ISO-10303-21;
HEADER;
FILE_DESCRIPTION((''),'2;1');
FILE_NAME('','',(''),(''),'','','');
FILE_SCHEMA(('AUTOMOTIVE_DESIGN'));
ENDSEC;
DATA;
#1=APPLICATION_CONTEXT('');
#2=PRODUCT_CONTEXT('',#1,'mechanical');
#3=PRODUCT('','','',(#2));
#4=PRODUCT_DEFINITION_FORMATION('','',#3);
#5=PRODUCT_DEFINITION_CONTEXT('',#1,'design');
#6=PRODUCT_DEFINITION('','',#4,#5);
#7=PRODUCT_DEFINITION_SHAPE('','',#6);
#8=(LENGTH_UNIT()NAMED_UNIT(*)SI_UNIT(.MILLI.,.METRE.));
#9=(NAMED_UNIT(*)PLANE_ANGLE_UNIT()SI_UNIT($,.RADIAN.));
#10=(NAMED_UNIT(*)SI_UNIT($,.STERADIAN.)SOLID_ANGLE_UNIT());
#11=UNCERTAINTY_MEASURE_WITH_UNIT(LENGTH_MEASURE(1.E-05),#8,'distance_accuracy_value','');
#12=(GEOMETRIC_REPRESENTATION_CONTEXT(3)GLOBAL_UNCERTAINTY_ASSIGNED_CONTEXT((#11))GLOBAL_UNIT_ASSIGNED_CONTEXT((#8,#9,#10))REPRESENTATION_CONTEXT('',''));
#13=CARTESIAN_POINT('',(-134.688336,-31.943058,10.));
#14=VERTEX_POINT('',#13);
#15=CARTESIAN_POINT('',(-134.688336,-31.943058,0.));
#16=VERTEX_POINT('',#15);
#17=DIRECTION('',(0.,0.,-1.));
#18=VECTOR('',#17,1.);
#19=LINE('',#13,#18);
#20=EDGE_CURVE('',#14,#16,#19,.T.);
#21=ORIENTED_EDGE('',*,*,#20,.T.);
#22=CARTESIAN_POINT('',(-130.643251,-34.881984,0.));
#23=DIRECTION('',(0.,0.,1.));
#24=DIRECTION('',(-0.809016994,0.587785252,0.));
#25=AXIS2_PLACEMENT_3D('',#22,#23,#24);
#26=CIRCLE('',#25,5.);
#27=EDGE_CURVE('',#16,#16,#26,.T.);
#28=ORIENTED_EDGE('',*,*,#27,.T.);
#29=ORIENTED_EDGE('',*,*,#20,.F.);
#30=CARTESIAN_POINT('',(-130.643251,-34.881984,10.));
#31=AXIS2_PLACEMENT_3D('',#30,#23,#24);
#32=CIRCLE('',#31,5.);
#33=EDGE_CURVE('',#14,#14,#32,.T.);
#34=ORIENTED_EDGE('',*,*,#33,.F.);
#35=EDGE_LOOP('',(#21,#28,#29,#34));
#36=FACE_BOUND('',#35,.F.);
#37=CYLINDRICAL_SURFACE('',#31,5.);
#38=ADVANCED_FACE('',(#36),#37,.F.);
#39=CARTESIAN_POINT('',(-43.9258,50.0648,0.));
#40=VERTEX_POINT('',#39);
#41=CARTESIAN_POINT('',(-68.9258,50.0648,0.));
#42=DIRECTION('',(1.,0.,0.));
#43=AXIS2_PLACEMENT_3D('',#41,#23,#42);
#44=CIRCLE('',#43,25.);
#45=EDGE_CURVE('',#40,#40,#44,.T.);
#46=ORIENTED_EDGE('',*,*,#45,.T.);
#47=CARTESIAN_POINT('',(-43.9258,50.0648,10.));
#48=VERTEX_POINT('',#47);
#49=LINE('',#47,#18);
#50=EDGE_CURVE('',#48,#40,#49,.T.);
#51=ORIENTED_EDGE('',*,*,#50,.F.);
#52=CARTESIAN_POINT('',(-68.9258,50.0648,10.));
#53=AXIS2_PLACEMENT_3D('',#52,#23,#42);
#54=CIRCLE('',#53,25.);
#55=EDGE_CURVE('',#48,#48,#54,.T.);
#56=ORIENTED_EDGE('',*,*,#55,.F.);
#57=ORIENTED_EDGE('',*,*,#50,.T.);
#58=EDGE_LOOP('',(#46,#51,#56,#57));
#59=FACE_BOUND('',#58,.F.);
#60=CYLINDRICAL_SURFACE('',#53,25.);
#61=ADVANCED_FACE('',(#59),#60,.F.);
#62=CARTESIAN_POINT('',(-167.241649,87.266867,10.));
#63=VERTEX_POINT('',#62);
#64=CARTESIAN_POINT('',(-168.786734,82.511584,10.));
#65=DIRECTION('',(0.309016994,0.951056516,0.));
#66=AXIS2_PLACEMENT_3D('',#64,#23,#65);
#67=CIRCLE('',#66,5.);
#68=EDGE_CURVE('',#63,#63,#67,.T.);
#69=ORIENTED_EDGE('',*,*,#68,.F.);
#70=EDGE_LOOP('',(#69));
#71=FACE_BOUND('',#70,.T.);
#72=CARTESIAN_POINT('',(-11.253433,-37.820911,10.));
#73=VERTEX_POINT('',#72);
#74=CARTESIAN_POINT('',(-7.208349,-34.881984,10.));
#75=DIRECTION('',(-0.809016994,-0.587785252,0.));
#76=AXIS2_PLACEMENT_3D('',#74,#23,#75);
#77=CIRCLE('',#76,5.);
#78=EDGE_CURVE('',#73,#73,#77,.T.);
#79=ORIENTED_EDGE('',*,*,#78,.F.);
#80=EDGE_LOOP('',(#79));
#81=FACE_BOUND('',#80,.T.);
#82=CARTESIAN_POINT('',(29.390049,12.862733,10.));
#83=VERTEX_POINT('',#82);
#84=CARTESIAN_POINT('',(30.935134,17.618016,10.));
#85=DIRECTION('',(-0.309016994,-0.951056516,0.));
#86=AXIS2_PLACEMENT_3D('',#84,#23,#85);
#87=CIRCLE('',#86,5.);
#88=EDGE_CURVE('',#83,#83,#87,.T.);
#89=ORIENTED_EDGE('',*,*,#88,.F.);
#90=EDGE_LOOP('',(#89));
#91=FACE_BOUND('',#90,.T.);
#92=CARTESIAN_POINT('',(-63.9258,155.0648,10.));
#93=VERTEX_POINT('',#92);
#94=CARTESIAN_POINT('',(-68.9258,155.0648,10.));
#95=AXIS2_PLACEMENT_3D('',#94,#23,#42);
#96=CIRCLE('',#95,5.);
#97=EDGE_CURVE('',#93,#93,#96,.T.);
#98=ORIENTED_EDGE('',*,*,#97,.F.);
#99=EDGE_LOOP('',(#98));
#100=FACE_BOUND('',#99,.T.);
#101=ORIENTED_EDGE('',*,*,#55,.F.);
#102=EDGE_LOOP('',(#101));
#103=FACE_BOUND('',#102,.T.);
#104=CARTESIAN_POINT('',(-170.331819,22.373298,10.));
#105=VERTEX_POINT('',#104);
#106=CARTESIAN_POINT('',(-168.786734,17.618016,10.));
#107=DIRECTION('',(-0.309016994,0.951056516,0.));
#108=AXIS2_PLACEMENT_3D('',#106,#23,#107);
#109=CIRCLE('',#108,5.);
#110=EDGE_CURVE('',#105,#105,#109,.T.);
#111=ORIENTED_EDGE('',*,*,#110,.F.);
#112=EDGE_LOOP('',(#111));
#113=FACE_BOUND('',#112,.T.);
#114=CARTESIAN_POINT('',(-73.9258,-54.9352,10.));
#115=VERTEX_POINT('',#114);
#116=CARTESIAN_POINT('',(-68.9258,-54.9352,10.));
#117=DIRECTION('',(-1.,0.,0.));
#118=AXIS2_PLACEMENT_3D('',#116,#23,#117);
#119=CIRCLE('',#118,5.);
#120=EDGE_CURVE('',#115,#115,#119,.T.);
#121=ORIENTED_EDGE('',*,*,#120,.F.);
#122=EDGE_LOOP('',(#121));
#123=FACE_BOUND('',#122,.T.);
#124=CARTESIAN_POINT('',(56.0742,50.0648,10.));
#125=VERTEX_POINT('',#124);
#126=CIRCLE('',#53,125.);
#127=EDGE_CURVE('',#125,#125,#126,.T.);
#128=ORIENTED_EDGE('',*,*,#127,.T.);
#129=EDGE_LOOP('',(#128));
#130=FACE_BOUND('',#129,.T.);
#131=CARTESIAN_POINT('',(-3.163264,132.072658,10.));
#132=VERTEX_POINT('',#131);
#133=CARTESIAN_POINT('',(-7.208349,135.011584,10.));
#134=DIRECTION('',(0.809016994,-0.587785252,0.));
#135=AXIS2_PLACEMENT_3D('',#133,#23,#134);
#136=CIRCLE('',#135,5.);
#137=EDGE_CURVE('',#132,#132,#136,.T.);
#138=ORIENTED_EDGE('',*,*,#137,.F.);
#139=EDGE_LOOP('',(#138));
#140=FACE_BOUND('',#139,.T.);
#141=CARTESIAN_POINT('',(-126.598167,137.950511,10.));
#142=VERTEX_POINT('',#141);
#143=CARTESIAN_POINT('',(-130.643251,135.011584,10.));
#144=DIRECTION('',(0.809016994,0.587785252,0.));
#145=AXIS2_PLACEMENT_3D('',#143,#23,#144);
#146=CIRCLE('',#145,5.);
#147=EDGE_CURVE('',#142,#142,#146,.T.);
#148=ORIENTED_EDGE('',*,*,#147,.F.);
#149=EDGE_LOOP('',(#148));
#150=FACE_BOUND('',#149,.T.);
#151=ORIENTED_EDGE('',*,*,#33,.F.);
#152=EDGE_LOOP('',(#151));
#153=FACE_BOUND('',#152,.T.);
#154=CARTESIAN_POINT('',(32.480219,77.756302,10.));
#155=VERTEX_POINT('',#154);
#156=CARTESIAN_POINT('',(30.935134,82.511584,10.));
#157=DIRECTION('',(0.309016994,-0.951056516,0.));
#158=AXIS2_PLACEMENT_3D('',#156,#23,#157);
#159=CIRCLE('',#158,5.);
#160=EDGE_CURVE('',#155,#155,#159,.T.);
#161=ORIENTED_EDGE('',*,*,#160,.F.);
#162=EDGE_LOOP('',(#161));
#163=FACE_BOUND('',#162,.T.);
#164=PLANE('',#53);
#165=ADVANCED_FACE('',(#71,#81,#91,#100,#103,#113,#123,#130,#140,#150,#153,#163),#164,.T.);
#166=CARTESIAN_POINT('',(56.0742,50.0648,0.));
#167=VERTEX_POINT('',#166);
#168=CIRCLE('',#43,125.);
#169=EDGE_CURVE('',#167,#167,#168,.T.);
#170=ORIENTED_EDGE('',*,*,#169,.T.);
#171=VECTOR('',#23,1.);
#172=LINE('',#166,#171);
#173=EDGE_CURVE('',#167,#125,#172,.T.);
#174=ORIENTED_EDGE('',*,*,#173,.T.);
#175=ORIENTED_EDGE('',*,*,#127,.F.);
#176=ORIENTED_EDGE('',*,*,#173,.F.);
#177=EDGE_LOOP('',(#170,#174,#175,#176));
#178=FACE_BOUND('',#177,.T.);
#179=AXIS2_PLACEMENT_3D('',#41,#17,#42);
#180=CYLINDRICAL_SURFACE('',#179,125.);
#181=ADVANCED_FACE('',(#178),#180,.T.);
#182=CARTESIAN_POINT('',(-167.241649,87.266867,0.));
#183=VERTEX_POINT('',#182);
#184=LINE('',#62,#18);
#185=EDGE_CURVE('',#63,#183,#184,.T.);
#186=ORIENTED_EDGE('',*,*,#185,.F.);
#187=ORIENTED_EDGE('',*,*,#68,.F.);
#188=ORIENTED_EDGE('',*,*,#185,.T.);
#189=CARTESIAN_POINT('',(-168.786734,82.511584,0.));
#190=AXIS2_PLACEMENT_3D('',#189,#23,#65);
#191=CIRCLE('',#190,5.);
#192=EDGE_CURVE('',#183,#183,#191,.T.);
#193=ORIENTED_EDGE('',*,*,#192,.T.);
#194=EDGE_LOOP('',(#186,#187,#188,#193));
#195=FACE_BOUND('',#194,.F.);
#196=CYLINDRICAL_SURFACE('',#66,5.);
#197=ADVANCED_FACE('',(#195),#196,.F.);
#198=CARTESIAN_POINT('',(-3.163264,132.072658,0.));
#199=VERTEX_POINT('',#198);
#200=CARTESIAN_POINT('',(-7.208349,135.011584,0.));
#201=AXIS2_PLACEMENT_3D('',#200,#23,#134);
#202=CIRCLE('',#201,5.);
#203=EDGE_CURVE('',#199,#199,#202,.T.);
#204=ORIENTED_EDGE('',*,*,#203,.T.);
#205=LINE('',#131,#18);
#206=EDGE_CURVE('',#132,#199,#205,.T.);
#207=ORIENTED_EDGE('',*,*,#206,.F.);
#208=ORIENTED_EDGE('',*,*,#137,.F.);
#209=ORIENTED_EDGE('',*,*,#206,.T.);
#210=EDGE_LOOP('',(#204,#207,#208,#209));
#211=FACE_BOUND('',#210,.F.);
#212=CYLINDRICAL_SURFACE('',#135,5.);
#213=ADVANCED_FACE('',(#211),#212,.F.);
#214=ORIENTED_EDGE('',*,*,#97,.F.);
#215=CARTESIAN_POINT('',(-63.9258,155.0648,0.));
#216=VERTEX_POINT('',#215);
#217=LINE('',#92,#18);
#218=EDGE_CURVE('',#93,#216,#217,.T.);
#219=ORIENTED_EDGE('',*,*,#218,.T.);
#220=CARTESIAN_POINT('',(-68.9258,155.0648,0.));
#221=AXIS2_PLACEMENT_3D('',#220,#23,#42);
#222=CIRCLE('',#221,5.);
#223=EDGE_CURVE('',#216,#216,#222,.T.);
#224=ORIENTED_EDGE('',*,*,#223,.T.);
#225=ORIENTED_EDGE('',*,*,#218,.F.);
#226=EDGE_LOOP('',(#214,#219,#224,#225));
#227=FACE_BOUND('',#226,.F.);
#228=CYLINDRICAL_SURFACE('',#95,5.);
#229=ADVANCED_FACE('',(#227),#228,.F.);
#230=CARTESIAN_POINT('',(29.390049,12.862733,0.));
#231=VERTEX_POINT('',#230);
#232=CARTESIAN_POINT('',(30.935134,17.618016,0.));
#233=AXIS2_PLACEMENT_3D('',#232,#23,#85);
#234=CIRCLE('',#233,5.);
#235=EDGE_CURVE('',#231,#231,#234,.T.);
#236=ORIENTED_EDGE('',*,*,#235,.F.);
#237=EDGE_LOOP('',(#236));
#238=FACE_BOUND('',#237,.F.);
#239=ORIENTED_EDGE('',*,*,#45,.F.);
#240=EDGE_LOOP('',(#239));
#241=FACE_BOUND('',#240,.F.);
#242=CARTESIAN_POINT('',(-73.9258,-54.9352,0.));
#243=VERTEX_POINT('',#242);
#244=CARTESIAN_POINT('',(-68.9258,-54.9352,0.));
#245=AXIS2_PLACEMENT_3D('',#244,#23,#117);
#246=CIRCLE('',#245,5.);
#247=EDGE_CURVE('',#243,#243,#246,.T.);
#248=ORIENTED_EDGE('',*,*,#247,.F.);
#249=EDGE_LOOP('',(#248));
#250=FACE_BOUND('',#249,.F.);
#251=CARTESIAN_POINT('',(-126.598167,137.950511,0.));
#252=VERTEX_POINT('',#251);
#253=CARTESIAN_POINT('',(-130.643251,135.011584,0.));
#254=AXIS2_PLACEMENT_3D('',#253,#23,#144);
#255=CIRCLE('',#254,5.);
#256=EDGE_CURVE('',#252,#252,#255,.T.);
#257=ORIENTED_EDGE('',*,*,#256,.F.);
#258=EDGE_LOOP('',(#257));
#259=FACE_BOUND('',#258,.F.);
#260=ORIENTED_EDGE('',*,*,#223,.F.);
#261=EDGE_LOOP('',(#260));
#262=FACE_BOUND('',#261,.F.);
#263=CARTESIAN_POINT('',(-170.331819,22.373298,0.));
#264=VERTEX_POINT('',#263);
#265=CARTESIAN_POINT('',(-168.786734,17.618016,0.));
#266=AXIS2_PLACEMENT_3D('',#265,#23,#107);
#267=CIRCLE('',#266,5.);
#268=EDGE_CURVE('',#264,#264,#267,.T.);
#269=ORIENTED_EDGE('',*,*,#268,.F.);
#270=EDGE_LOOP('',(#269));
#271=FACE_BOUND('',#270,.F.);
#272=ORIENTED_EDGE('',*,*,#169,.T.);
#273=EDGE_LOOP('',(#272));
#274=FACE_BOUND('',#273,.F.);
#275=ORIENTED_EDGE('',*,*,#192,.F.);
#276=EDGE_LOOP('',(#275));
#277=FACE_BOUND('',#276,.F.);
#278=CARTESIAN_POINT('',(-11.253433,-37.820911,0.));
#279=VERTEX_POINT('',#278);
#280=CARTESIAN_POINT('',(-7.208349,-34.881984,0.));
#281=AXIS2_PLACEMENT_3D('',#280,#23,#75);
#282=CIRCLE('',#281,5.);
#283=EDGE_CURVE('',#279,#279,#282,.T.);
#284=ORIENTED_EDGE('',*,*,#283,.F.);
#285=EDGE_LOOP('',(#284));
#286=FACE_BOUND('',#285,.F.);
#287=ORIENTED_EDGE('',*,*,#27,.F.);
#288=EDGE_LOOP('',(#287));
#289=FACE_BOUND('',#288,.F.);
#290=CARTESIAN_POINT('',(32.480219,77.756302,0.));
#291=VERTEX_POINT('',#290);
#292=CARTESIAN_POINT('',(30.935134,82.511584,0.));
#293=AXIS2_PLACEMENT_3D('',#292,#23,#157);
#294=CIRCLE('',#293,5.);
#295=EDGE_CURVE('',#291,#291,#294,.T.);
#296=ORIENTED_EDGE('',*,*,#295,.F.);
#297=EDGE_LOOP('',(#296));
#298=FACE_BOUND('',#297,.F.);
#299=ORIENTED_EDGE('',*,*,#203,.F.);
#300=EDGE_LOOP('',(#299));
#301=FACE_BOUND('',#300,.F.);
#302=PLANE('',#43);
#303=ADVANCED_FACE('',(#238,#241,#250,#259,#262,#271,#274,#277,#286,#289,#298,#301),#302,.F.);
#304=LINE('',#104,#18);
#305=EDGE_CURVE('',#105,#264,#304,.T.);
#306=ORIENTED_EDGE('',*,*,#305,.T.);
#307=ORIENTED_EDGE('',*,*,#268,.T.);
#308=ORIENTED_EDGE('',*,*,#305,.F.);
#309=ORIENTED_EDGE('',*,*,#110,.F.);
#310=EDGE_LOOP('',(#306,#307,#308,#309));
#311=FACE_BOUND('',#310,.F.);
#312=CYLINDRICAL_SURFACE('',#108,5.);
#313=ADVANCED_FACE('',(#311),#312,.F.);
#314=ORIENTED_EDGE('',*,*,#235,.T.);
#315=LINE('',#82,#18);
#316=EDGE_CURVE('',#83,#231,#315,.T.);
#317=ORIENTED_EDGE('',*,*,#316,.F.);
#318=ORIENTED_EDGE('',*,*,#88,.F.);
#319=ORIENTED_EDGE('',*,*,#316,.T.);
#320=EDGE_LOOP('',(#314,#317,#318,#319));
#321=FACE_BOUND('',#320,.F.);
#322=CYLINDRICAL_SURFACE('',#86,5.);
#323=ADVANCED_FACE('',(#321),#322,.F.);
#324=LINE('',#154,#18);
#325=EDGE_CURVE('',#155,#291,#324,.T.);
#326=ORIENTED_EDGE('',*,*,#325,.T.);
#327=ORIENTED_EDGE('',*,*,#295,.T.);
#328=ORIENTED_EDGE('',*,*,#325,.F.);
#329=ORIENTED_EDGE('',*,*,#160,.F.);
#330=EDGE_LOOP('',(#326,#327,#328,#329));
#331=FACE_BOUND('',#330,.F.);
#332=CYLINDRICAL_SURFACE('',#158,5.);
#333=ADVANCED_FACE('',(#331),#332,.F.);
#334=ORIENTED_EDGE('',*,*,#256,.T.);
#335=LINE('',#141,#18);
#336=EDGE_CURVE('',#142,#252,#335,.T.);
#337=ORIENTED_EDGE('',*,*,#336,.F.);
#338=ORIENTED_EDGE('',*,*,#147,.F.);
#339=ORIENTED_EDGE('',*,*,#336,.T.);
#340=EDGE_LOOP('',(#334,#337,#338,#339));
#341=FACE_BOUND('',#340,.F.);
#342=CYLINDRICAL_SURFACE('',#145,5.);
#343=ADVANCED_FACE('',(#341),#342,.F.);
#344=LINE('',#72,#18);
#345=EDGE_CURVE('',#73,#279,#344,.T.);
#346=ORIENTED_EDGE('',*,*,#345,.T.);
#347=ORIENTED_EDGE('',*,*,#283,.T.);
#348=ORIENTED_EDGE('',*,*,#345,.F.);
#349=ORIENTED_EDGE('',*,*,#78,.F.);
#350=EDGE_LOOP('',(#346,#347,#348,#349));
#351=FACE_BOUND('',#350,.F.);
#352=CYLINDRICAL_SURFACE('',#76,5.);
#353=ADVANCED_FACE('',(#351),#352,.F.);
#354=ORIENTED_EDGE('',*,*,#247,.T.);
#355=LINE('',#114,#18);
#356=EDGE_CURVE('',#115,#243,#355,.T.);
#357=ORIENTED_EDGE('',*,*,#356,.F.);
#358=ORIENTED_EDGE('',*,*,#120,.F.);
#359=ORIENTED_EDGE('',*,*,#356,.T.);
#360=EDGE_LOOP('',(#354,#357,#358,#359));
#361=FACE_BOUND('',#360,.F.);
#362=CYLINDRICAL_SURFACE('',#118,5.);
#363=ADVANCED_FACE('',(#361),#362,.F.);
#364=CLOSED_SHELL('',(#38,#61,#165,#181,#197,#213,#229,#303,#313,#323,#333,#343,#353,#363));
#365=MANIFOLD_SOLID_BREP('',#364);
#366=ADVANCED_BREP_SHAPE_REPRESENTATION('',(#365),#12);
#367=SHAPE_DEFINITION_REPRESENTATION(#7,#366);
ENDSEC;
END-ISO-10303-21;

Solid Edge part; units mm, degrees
sketch "Sketch1" plane through (0, 0, 0) normal (0, 0, 1) x (1, 0, 0)
  circle A0 centre (-68.9258, 50.0648) radius 125
  dimension "D1" = 250
extrude "Protrusion1" add sketch "Sketch1" along normal blind 10
sketch "Sketch2" plane through (-68.9258, 50.0648, 10) normal (0, 0, 1) x (1, 0, 0)
  circle A0 centre (0, 105) radius 5
  dimension "D1" = 10
  dimension "D2" = 20
extrude "Cutout1" cut sketch "Sketch2" against normal through all
pattern_circular "Pattern1" count 10 over 360 about axis through (-68.9258, 50.0648, 10) along (0, 0, -1) of "Cutout1"
sketch "Sketch3" plane through (-68.9258, 50.0648, 10) normal (0, 0, 1) x (1, 0, 0)
  circle A0 centre (0, 0) radius 25
  dimension "D1" = 50
extrude "Cutout2" cut sketch "Sketch3" against normal through all
